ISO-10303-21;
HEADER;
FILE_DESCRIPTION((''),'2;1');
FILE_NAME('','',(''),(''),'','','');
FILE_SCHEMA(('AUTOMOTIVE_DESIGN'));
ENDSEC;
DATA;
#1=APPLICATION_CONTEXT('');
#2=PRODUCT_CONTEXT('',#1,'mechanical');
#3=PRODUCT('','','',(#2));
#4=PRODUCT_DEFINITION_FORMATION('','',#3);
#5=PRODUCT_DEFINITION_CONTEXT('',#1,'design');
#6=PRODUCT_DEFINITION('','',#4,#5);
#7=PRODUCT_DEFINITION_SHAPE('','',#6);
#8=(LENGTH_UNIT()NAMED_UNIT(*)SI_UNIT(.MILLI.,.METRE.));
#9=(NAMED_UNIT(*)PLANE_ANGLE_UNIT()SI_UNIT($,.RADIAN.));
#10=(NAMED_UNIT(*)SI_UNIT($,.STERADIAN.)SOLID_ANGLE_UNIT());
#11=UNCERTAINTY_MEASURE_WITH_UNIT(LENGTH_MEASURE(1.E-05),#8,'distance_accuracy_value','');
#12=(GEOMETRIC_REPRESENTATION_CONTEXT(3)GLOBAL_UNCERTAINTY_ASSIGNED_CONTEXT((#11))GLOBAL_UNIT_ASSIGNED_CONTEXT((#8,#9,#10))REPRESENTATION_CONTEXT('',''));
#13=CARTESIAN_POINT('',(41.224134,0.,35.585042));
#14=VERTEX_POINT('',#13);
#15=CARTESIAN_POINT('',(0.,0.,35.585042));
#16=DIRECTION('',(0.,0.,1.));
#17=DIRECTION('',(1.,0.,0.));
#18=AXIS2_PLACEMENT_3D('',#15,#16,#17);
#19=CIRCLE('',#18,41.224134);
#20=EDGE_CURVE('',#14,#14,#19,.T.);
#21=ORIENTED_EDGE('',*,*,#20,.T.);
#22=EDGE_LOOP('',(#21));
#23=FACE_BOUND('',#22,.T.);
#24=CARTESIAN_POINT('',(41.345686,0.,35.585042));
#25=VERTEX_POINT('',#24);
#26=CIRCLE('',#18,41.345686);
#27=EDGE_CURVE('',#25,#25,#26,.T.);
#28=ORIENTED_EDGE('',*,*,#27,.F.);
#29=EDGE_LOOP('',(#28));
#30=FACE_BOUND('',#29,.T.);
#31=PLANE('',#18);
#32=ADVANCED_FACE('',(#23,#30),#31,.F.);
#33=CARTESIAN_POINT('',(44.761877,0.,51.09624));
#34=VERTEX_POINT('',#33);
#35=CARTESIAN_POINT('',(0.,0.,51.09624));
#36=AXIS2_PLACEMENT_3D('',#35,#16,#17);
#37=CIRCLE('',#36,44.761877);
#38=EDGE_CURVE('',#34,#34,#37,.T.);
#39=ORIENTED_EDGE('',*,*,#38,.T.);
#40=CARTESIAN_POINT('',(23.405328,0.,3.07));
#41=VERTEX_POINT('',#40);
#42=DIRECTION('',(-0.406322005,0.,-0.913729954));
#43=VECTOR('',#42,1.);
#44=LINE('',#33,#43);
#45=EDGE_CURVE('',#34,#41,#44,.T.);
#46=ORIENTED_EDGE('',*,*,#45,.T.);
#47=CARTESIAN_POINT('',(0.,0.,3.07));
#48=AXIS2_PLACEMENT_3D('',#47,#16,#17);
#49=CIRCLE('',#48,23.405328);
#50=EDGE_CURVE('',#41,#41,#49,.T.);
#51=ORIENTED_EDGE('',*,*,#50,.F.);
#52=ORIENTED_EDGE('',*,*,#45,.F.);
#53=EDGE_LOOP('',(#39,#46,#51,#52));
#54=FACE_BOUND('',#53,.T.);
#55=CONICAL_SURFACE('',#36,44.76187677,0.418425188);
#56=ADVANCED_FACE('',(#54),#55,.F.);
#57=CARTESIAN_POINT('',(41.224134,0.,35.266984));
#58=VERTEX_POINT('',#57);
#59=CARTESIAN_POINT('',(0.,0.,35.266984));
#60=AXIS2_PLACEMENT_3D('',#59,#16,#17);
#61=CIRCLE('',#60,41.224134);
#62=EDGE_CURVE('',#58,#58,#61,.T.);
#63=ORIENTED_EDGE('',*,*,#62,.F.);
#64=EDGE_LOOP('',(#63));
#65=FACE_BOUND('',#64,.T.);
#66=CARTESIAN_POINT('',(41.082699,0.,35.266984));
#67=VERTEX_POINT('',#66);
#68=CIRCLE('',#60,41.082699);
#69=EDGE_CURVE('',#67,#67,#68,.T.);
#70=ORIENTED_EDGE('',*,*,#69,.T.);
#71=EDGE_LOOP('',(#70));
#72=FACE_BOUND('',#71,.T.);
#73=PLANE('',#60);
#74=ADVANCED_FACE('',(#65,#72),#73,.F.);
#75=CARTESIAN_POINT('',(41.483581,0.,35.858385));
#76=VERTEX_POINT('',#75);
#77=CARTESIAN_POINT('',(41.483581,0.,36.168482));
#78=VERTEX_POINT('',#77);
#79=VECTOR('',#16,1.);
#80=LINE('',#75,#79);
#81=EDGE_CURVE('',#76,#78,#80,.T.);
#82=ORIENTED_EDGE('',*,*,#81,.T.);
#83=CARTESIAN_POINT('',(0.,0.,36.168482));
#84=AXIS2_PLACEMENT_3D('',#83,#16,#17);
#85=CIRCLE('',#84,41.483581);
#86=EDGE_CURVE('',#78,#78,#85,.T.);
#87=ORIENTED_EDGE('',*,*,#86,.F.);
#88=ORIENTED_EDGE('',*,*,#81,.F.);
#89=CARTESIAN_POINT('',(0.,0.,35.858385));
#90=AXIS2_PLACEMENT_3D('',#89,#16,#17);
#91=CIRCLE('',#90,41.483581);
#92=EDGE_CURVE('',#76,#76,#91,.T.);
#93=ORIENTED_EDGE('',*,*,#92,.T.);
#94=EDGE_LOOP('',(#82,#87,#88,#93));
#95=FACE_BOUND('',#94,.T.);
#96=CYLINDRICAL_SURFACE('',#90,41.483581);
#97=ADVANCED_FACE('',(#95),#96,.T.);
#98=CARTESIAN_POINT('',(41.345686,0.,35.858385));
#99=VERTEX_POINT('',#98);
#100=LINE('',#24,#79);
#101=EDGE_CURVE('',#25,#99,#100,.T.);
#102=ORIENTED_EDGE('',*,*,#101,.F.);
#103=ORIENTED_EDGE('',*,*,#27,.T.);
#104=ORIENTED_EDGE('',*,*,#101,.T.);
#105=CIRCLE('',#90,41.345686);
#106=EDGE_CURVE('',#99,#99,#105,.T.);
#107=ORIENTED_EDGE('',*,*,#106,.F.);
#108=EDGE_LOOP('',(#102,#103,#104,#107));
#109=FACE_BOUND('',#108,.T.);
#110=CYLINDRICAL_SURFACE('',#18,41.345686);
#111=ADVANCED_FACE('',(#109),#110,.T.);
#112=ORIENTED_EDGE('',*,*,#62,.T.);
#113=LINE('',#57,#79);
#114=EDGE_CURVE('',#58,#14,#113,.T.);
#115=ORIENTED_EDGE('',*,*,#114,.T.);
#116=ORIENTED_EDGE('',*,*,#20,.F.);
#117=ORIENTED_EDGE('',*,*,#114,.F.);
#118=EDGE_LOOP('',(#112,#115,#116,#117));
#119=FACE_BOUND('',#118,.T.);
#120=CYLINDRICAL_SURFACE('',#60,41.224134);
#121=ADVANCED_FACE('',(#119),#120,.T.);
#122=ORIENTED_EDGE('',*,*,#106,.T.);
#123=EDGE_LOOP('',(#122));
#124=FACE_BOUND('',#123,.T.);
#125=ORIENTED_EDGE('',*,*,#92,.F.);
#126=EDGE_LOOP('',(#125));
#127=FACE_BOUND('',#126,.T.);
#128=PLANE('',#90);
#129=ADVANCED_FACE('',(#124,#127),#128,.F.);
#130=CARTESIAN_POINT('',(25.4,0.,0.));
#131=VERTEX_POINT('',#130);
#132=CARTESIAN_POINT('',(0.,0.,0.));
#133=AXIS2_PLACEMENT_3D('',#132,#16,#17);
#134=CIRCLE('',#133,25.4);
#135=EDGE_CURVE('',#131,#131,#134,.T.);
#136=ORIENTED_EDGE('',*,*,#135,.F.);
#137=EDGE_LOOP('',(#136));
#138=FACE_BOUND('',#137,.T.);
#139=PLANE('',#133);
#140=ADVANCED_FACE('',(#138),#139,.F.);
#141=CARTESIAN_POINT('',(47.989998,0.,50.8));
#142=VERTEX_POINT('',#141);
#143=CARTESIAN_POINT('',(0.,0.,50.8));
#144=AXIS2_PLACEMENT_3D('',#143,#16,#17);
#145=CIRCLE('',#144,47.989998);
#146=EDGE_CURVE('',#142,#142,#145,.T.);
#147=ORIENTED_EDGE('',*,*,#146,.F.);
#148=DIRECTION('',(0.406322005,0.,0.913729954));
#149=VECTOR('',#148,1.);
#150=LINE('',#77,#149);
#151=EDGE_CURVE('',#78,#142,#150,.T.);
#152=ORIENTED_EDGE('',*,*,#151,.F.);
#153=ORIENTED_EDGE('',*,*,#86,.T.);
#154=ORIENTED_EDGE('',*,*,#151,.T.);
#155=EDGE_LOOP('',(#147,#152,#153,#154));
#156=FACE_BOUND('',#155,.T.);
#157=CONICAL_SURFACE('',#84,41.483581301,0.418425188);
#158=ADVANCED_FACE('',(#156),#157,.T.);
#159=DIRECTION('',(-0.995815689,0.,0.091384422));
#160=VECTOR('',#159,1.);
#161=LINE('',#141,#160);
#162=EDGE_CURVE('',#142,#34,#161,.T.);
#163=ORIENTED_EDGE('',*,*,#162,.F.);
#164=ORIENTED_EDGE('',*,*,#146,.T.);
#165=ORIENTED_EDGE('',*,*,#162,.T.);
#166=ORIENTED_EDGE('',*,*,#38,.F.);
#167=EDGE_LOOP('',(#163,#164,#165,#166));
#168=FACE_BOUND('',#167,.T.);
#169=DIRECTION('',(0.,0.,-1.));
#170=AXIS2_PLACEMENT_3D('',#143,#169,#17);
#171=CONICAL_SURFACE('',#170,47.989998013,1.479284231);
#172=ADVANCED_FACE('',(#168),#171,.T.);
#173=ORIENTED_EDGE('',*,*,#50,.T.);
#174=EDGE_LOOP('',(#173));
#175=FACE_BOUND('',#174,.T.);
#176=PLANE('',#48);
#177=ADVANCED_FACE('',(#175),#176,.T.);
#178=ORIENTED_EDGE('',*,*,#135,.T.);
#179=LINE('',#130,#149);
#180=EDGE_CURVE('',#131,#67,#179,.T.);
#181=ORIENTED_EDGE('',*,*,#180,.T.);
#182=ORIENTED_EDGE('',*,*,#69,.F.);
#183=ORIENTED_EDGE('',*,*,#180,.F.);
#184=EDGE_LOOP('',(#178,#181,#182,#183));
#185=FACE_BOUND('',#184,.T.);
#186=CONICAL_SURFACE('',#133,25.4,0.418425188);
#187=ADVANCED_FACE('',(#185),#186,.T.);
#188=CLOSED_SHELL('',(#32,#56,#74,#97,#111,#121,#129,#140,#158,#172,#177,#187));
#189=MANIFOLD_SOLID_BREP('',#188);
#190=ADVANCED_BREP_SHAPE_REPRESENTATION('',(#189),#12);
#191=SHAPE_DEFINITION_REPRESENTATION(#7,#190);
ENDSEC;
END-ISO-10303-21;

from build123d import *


# Not quite as in the source:
# - a feature names something its author has since deleted; it is built from what else it names


with BuildPart() as f1:
    # F0 (on Front) → F1 (revolve)
    with BuildSketch(Plane.XZ):
        Polygon((0, 3.0699997223), (0, 0), (25.4, 0), (41.0826989019, 35.2669842541), (41.2241344504, 35.5850420892), (41.3456860605, 35.8583852649), (41.4835813014, 36.1684817169), (47.9899980128, 50.8), (44.7618767703, 51.0962395517), (23.4053282997, 3.0699997223), align=None)
        Polygon((41.4835813014, 36.1684817169), (41.3456860605, 35.8583852649), (41.4835813014, 35.8583852649), align=None)
        Polygon((41.3456860605, 35.8583852649), (41.2241344504, 35.5850420892), (41.3456860605, 35.5850420892), align=None)
        Polygon((41.2241344504, 35.5850420892), (41.0826989019, 35.2669842541), (41.2241344504, 35.2669842541), align=None)
    revolve(axis=Axis((0, 0, 25.4), (0, 0, 1)))


solid = f1.part
